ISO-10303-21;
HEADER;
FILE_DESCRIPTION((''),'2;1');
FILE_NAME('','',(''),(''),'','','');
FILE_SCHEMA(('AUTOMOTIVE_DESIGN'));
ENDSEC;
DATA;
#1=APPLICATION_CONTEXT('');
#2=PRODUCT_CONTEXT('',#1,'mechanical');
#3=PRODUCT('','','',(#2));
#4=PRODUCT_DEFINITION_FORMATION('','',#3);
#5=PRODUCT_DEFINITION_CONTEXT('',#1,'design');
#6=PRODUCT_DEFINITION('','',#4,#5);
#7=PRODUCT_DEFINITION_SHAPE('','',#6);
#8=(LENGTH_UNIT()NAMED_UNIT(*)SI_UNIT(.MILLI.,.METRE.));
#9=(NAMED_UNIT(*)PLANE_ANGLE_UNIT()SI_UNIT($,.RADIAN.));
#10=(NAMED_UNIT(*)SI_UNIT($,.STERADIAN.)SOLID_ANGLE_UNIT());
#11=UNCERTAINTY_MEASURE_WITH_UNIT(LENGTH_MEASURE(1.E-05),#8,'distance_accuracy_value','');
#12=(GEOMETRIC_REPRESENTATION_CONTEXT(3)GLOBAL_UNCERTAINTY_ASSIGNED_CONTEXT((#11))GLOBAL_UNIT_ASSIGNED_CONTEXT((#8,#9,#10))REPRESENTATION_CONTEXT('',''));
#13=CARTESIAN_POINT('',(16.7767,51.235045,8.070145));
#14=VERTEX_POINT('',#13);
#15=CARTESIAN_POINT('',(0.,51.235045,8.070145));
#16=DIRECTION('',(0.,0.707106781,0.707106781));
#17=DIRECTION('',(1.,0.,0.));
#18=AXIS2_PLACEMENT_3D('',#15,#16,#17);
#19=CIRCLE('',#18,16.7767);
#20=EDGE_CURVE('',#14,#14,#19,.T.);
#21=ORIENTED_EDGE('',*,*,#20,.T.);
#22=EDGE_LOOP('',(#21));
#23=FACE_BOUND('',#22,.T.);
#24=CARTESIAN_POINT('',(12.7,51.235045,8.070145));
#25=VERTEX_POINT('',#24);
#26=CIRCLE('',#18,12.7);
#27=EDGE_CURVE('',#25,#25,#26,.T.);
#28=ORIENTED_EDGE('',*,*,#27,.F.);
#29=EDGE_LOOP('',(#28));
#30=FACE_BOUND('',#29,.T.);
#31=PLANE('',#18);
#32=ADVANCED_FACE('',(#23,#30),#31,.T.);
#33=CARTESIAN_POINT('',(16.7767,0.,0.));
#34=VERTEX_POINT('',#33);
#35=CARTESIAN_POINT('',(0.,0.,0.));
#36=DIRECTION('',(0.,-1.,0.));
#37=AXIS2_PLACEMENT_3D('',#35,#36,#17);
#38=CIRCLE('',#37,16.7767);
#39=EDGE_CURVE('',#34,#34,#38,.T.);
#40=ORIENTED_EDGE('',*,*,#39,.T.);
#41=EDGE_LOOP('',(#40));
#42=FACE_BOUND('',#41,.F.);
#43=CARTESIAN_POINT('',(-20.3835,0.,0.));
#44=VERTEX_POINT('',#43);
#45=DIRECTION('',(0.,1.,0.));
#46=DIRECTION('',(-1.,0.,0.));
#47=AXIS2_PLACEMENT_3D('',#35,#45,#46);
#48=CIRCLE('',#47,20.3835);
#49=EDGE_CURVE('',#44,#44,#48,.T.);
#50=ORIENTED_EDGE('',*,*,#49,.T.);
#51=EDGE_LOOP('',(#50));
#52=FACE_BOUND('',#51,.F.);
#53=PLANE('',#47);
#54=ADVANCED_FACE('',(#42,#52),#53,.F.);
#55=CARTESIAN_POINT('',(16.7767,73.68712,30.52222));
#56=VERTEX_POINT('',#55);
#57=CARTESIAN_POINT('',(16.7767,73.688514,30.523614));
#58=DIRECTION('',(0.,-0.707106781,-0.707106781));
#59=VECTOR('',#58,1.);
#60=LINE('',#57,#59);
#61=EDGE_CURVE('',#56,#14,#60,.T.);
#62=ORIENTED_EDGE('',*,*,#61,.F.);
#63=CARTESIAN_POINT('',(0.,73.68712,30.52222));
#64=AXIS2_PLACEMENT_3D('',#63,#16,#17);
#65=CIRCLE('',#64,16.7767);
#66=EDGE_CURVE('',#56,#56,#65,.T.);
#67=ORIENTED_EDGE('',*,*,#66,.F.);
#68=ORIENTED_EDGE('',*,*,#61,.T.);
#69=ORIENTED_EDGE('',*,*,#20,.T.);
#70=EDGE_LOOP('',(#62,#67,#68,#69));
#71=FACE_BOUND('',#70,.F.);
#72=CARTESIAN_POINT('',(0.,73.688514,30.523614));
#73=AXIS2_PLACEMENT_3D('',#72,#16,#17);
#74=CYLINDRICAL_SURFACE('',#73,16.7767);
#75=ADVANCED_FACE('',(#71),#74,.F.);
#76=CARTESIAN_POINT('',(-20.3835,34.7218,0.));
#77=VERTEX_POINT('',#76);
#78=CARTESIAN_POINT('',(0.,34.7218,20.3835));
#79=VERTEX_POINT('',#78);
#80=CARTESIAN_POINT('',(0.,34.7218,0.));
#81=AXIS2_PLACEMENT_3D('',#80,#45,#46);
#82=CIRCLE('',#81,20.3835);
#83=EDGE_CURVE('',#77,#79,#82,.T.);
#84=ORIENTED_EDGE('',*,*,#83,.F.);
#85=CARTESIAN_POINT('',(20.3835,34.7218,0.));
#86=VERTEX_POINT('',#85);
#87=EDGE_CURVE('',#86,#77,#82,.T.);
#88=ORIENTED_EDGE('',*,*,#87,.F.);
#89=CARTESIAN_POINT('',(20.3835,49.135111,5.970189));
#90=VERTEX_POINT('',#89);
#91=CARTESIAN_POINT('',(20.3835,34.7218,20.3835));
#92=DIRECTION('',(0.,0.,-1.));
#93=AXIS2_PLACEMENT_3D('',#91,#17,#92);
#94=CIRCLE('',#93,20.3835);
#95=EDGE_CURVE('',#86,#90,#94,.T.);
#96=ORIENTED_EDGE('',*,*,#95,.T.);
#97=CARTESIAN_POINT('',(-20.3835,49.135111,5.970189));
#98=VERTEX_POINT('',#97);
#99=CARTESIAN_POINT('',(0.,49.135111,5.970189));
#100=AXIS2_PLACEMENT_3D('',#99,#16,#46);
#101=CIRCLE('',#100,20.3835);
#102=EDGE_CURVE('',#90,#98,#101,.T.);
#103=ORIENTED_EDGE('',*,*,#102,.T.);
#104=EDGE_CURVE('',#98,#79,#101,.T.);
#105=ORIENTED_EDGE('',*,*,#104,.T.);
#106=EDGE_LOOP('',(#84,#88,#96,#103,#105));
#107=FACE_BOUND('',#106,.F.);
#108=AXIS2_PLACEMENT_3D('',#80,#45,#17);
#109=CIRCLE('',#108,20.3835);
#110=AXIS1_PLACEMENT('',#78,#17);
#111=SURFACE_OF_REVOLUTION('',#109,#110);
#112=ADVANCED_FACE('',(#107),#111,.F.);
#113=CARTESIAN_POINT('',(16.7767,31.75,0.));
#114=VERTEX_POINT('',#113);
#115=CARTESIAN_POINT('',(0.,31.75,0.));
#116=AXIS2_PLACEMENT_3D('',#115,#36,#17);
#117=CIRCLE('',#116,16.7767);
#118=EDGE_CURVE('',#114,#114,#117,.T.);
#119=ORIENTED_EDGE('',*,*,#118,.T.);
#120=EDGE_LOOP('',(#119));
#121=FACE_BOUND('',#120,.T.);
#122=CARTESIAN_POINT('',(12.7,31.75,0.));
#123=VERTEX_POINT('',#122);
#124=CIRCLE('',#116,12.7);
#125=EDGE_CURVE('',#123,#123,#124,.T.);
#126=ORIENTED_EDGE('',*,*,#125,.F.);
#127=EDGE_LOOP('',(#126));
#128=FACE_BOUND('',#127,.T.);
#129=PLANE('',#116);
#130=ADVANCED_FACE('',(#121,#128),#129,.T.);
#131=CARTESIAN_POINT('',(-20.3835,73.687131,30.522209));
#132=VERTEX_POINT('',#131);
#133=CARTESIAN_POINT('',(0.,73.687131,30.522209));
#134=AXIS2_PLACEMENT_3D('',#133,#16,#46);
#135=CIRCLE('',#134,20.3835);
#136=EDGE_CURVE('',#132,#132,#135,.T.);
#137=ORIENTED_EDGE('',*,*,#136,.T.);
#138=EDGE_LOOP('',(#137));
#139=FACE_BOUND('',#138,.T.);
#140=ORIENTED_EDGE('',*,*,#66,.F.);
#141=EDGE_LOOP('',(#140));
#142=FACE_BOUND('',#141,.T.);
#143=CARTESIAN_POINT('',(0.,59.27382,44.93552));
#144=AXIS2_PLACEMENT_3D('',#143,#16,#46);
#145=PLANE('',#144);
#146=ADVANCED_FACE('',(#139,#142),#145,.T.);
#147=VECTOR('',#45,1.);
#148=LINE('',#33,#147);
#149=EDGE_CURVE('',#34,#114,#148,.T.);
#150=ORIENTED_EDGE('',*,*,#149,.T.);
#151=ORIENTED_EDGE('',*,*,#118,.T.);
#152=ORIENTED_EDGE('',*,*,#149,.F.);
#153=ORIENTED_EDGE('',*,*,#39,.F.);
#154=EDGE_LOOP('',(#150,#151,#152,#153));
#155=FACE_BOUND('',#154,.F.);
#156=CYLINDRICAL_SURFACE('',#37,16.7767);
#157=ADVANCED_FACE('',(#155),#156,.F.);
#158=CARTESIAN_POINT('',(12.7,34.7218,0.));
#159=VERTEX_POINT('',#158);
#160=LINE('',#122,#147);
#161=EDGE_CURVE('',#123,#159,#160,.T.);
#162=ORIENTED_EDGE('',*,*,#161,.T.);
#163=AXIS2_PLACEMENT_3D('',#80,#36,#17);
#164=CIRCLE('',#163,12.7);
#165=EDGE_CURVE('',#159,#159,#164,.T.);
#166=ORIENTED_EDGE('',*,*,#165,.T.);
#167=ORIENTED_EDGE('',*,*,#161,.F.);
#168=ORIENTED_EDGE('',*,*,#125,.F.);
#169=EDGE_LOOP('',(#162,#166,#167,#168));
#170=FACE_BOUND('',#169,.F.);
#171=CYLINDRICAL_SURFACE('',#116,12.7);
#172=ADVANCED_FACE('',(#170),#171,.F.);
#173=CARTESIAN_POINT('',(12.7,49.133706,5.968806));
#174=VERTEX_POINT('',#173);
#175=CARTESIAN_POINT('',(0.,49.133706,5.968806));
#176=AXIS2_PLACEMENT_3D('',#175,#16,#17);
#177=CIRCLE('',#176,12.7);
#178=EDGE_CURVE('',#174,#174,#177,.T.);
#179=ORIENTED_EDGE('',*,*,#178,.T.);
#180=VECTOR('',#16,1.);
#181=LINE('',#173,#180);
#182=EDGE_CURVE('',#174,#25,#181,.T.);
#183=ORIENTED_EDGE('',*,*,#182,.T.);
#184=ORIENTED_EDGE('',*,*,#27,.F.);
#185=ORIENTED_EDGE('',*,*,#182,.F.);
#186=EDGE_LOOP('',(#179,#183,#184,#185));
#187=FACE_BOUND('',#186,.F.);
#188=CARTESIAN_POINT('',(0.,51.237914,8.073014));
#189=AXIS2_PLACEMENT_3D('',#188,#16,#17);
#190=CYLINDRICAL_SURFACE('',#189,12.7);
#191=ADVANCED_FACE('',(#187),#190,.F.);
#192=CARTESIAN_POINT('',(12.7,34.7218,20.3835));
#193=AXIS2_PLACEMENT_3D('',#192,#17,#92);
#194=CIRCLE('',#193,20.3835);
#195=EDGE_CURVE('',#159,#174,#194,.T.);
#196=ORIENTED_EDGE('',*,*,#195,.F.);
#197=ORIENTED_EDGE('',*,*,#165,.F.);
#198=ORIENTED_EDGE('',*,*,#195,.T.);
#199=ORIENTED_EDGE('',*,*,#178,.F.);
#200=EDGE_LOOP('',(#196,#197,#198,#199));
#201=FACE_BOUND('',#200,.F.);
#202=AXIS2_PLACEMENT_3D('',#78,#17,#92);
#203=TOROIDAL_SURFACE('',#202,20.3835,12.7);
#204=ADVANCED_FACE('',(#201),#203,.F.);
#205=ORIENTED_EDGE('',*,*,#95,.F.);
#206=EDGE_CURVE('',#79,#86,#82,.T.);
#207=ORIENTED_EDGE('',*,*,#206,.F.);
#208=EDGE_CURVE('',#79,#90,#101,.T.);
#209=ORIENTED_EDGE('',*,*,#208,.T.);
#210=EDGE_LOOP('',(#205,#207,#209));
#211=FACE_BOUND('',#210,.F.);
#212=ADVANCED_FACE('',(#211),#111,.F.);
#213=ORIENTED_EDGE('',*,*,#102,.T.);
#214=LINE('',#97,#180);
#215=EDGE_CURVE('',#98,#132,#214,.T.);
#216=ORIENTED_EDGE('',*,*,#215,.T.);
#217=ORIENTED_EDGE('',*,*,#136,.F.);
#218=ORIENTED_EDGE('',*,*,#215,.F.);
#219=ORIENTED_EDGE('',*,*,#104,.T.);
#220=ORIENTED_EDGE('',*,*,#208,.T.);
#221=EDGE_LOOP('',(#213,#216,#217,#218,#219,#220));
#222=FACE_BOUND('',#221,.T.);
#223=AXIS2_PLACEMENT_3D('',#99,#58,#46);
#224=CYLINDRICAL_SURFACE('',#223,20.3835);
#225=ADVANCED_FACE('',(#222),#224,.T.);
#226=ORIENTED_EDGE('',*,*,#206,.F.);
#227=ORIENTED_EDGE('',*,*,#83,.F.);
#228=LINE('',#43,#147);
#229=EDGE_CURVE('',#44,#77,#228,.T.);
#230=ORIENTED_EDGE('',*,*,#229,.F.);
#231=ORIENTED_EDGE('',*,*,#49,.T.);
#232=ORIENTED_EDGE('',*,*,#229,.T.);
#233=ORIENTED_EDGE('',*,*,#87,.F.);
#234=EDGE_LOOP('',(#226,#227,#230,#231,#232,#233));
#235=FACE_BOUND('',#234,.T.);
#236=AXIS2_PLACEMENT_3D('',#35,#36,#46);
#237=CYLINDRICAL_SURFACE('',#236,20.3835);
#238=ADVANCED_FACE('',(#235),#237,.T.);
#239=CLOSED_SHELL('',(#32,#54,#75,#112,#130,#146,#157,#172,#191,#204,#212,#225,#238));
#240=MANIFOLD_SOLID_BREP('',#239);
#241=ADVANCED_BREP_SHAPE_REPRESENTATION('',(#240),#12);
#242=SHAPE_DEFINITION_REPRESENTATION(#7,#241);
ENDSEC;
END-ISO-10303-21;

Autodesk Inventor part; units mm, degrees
sketch "Sketch1" plane through (0, 0, 0) normal (0, 1, 0) x (-1, 0, 0)
  circle A0 centre (0, 0) radius 20.3835
  dimension "d0" = 40.767
extrude "Extrusion1" add sketch "Sketch1" along normal blind 34.7218
sketch "Sketch2" plane through (0, 34.7218, 0) normal (0, 1, 0) x (1, 0, 0)
  circle A0 centre (0, 0) radius 20.3835 projected
  line L0 (0, -20.3835) -> (-27.7458, -20.3835)
ref_plane "Work Plane1" through (0, 34.7218, 20.3835) normal (0, 0.7071068, 0.7071068) x (-1, 0, 0)
sketch "Sketch3" plane through (0, 34.7218, 20.3835) normal (0, 0.7071068, 0.7071068) x (-1, 0, 0)
  circle A0 centre (0, -20.3835) radius 20.3835 projected
  circle A1 centre (0, -20.3835) radius 20.3835
  point P0 (0, 10.1387)
extrude "Extrusion2" add sketch "Sketch3" along normal blind 34.7218
sketch "Sketch4" plane through (0, 0, 0) normal (0, -1, 0) x (1, 0, 0)
  circle A0 centre (0, 0) radius 16.7767
  dimension "d6" = 33.5534
extrude "Extrusion3" cut sketch "Sketch4" against normal blind 31.75
sketch "Sketch5" plane through (0, 73.6871, 30.5222) normal (0, 0.7071068, 0.7071068) x (1, 0, 0)
  circle A0 centre (0, 0) radius 16.7767
  point P0 (0, -30.5222)
  dimension "d9" = 33.5534
extrude "Extrusion4" cut sketch "Sketch5" against normal blind 31.75
ref_plane "Work Plane2" through (0, 51.2365, 8.0716) normal (0, 0.7071068, 0.7071068) x (1, 0, 0)
ref_plane "Work Plane3" through (0, 31.75, 0) normal (0, -1, 0) x (1, 0, 0)
revolve "Revolution1" add sketch "Sketch2" angle 45 about axis through (0, 34.7218, 20.3835) along (1, 0, 0)
ref_plane "Work Plane4" through (0, 34.7218, 20.3835) normal (-1, 0, 0) x (0, -1, 0)
sketch "Sketch6" plane through (0, 34.7218, 20.3835) normal (-1, 0, 0) x (0, -1, 0)
  line L0 (0, 33.7996) -> (-51.2396, 33.7996)
  point P0 (34.7218, -20.3835)
ref_plane "Work Plane5" through (0, 34.7218, 54.1831) normal (-0.7071068, 0, -0.7071068) x (0, 1, 0)
sketch "Sketch8" plane through (0, 34.7218, 20.3835) normal (-1, 0, 0) x (0, -1, 0)
  line L0 (-28.3776, -24.1748) -> (-4.6518, -0.449) projected
  line L1 (2.9718, -3.6068) -> (2.9718, -37.1602) projected
  line L2 (-4.6518, -0.449) -> (2.9718, -3.6068)
  point P0 (34.7218, -20.3835)
sketch "Sketch9" plane through (0, 31.75, 0) normal (0, -1, 0) x (1, 0, 0)
  circle A0 centre (0, 0) radius 12.7
  dimension "d17" = 25.4
extrude "Extrusion5" cut sketch "Sketch9" against normal blind 2.9718
sketch "Sketch10" plane through (0, 51.2365, 8.0716) normal (0, 0.7071068, 0.7071068) x (1, 0, 0)
  circle A0 centre (0, 0) radius 12.7
  point P0 (0, -30.5222)
  dimension "d20" = 25.4
extrude "Extrusion6" cut sketch "Sketch10" against normal blind 2.9718
sketch "Sketch11" plane through (0, 34.7218, 0) normal (0, -1, 0) x (1, 0, 0)
  circle A0 centre (0, 0) radius 12.7
  line L0 (28.5369, 20.3835) -> (-28.5369, 20.3835) projected
revolve "Revolution2" cut sketch "Sketch11" angle 45 about axis through (0, 34.7218, 20.3835) along (1, 0, 0)
properties part number "45 Elbow 1 Inch"
